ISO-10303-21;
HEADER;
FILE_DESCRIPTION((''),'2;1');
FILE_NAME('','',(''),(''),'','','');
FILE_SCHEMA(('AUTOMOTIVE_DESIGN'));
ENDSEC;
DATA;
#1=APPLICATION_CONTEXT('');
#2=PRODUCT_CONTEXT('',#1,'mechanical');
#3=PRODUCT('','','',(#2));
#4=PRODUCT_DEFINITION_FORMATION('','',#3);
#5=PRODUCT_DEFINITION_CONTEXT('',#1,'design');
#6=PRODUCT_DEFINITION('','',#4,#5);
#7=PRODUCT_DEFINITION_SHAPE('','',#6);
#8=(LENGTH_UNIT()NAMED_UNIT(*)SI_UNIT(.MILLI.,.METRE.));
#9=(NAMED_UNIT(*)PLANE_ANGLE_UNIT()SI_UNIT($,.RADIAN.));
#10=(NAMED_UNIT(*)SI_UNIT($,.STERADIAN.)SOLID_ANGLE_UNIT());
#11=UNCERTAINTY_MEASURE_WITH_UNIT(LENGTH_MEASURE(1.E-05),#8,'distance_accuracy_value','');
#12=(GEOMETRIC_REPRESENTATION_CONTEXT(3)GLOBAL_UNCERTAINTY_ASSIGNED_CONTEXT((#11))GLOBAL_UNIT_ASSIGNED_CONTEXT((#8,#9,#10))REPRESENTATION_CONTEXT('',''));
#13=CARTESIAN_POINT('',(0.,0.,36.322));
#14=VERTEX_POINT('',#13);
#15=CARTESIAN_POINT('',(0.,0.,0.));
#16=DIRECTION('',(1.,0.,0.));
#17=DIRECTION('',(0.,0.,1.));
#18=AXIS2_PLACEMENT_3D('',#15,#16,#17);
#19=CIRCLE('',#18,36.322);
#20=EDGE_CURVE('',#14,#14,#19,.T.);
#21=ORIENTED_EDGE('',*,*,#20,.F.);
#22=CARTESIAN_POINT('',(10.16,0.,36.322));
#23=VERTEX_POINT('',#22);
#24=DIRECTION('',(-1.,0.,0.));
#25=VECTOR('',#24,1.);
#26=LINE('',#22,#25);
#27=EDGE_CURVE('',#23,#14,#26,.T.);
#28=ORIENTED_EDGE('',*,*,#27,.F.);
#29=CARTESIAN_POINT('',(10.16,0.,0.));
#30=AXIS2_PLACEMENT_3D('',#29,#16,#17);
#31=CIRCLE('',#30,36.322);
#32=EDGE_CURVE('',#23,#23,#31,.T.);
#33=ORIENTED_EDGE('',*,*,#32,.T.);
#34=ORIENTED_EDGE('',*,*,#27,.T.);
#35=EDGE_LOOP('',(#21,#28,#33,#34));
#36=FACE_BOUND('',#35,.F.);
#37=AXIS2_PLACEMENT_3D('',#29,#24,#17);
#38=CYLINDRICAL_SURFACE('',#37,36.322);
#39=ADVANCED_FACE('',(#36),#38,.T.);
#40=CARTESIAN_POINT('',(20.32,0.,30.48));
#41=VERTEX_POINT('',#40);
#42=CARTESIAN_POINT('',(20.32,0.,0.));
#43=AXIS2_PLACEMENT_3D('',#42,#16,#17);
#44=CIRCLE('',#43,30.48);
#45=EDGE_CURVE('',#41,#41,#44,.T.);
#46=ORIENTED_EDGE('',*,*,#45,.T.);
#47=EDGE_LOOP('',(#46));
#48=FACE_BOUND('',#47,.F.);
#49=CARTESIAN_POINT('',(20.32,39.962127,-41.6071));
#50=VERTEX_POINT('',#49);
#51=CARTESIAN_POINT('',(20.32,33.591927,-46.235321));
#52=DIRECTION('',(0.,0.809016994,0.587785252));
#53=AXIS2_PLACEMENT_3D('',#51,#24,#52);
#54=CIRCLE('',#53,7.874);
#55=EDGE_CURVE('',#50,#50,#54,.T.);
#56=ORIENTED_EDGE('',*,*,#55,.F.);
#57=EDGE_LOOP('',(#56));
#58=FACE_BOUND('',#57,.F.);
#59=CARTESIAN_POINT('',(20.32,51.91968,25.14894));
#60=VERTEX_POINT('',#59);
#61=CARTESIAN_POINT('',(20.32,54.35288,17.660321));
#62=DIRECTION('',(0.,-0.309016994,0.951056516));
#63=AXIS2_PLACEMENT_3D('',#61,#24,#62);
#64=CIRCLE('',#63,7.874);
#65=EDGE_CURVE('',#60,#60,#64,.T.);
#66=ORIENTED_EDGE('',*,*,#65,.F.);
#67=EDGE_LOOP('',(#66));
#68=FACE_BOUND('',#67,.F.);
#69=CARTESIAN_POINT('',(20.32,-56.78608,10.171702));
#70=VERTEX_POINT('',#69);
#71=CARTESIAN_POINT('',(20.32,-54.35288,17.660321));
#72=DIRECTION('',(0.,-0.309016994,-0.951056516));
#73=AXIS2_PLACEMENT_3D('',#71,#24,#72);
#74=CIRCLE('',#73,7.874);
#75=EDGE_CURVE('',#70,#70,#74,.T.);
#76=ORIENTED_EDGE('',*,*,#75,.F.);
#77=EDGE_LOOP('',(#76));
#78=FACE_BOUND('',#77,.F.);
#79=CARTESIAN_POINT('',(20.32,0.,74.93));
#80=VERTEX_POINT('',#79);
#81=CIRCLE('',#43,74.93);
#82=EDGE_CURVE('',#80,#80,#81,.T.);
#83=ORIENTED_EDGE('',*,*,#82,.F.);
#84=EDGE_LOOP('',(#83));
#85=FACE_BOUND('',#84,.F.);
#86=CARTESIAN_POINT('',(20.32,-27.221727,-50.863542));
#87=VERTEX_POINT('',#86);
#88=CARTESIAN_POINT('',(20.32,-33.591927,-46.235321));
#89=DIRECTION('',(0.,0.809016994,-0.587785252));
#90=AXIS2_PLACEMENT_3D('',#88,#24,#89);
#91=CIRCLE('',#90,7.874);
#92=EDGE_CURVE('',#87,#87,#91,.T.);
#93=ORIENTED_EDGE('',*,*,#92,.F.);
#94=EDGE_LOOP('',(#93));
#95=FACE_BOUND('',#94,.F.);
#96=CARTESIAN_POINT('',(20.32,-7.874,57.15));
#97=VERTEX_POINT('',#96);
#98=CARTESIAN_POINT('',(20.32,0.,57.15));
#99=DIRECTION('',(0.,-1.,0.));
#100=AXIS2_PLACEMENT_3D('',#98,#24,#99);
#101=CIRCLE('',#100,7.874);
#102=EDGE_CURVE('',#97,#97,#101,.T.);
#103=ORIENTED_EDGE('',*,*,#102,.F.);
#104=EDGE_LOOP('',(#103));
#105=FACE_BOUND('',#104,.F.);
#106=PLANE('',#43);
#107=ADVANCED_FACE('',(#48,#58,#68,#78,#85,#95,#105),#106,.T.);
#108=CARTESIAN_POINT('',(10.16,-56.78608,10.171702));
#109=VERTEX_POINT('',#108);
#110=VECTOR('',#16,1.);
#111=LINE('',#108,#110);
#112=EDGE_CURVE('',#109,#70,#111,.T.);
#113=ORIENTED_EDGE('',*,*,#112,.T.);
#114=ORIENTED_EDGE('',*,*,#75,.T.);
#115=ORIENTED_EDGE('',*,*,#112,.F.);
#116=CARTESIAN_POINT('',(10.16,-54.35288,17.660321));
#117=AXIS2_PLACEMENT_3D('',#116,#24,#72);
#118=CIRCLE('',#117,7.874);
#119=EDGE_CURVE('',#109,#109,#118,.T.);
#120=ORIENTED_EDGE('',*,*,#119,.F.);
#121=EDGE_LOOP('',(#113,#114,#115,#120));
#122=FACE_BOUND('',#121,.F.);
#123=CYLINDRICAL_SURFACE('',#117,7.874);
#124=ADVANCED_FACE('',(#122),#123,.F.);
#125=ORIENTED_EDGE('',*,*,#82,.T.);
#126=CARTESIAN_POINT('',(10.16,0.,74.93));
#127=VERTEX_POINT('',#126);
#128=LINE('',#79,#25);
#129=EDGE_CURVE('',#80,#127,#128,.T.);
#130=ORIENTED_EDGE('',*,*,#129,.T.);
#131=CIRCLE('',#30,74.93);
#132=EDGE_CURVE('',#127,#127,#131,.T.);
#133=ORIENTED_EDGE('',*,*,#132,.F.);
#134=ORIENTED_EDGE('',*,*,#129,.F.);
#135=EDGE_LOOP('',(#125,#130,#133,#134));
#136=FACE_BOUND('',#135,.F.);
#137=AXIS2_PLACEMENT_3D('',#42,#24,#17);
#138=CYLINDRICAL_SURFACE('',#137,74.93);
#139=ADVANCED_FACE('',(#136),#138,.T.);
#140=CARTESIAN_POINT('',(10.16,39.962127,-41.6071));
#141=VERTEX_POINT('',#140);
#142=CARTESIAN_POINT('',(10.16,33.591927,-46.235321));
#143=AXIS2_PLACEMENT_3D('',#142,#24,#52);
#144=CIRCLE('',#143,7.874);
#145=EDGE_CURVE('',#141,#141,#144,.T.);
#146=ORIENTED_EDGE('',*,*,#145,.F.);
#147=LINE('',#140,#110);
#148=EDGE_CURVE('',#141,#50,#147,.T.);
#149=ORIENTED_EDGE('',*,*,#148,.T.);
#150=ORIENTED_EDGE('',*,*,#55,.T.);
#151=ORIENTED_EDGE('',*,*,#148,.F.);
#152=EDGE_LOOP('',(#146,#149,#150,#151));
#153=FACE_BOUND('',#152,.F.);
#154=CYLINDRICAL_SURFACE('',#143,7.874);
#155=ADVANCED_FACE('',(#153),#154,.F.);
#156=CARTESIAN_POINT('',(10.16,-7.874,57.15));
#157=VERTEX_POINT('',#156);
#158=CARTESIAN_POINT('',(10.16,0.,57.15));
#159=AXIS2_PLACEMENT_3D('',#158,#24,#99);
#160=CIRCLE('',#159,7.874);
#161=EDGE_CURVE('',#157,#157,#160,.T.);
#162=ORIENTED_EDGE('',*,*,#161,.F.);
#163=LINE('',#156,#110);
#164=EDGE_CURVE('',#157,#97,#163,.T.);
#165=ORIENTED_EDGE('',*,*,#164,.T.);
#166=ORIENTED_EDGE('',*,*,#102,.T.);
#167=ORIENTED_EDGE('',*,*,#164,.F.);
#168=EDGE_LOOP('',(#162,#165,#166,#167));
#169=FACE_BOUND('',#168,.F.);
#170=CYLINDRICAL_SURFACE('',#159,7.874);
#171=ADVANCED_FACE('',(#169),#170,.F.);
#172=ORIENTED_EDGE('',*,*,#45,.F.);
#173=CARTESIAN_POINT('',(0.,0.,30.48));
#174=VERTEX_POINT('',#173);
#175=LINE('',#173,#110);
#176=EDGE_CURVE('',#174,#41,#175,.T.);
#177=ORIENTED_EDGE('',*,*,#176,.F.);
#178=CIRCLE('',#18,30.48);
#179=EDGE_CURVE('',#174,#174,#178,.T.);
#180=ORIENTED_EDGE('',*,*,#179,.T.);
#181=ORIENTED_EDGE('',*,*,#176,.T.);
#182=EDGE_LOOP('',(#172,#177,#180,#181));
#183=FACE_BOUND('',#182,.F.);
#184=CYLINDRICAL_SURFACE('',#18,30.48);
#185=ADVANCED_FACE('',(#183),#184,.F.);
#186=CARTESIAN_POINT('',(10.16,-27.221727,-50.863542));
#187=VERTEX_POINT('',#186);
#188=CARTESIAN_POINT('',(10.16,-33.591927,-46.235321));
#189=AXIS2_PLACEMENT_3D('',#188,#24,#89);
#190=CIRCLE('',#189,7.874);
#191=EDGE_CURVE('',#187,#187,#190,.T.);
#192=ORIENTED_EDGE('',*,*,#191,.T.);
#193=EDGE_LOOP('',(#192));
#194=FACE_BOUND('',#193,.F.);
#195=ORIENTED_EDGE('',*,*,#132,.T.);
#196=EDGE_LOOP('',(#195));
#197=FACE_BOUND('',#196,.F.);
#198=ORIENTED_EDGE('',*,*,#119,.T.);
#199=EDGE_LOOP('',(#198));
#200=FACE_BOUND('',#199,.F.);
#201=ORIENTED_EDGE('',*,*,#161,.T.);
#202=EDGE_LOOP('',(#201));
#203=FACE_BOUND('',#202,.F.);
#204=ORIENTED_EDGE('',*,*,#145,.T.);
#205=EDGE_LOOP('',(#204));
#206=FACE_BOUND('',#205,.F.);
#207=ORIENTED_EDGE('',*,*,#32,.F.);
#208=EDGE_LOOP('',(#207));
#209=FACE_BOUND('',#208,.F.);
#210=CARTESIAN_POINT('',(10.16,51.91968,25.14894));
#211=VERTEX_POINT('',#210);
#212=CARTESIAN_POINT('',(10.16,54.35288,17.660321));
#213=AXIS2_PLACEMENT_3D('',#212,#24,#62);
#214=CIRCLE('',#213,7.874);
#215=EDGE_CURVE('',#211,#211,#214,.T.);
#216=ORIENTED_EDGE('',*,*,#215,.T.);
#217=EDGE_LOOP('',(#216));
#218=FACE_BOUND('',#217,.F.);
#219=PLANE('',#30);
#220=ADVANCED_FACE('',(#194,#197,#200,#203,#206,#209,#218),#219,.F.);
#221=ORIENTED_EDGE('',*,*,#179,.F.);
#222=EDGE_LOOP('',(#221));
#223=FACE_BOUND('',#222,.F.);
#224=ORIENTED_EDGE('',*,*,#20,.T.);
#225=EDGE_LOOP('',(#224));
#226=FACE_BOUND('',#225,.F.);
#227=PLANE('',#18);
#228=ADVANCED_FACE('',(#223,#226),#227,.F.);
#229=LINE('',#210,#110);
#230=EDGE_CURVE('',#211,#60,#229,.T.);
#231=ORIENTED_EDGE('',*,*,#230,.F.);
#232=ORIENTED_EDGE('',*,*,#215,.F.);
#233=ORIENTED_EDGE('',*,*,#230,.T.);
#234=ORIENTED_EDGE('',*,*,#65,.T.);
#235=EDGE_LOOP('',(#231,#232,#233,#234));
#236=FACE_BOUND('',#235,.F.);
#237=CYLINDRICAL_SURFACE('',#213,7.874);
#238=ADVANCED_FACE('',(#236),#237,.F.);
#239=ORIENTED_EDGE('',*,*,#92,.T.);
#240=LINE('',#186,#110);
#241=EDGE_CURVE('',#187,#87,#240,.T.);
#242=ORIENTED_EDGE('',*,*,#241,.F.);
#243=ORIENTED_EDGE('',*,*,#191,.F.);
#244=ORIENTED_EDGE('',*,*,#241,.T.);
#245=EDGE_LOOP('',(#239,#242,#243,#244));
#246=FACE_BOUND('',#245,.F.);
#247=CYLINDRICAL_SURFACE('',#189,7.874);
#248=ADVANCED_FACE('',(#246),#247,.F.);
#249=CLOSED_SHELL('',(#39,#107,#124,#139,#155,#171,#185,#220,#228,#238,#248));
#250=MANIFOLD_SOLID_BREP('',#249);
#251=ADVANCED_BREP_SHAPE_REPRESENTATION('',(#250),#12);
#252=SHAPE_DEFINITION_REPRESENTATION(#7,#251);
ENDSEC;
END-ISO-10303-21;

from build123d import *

# Parameters (mm, degrees)
F3_R            = 7.874
F4_DEPTH        = 10.161
F4_COPIES_COUNT = 5


# Not quite as in the source:
# - a pattern or mirror of a feature is missing from the dataset's text; its kind, count and spacing are read off the source's solid


with BuildPart() as f2:
    # F1 (on Front) → F2 (revolve)
    with BuildSketch(Plane.XZ):
        Polygon((0, 36.322), (0, 30.48), (20.32, 30.48), (20.32, 74.93), (10.16, 74.93), (10.16, 36.322), align=None)
    revolve(axis=Axis((6.4773708582, 0, 0), (1, 0, 0)))

    # F3 (on face) → F4 (cut, through all)
    with BuildSketch(Plane(origin=(10.16, 0, 0), x_dir=(0, -1, 0), z_dir=(-1, 0, 0))):
        with Locations((0, 57.15)):
            Circle(F3_R)
    f4 = extrude(amount=-F4_DEPTH, mode=Mode.SUBTRACT)

    # F4_copies: F4 ×5 about axis
    f4_copies_axis = Axis((0, 0, 0), (1, 0, 0))
    for i in range(1, F4_COPIES_COUNT):
        add(f4.rotate(f4_copies_axis, i * 360 / F4_COPIES_COUNT), mode=Mode.SUBTRACT)


solid = f2.part
